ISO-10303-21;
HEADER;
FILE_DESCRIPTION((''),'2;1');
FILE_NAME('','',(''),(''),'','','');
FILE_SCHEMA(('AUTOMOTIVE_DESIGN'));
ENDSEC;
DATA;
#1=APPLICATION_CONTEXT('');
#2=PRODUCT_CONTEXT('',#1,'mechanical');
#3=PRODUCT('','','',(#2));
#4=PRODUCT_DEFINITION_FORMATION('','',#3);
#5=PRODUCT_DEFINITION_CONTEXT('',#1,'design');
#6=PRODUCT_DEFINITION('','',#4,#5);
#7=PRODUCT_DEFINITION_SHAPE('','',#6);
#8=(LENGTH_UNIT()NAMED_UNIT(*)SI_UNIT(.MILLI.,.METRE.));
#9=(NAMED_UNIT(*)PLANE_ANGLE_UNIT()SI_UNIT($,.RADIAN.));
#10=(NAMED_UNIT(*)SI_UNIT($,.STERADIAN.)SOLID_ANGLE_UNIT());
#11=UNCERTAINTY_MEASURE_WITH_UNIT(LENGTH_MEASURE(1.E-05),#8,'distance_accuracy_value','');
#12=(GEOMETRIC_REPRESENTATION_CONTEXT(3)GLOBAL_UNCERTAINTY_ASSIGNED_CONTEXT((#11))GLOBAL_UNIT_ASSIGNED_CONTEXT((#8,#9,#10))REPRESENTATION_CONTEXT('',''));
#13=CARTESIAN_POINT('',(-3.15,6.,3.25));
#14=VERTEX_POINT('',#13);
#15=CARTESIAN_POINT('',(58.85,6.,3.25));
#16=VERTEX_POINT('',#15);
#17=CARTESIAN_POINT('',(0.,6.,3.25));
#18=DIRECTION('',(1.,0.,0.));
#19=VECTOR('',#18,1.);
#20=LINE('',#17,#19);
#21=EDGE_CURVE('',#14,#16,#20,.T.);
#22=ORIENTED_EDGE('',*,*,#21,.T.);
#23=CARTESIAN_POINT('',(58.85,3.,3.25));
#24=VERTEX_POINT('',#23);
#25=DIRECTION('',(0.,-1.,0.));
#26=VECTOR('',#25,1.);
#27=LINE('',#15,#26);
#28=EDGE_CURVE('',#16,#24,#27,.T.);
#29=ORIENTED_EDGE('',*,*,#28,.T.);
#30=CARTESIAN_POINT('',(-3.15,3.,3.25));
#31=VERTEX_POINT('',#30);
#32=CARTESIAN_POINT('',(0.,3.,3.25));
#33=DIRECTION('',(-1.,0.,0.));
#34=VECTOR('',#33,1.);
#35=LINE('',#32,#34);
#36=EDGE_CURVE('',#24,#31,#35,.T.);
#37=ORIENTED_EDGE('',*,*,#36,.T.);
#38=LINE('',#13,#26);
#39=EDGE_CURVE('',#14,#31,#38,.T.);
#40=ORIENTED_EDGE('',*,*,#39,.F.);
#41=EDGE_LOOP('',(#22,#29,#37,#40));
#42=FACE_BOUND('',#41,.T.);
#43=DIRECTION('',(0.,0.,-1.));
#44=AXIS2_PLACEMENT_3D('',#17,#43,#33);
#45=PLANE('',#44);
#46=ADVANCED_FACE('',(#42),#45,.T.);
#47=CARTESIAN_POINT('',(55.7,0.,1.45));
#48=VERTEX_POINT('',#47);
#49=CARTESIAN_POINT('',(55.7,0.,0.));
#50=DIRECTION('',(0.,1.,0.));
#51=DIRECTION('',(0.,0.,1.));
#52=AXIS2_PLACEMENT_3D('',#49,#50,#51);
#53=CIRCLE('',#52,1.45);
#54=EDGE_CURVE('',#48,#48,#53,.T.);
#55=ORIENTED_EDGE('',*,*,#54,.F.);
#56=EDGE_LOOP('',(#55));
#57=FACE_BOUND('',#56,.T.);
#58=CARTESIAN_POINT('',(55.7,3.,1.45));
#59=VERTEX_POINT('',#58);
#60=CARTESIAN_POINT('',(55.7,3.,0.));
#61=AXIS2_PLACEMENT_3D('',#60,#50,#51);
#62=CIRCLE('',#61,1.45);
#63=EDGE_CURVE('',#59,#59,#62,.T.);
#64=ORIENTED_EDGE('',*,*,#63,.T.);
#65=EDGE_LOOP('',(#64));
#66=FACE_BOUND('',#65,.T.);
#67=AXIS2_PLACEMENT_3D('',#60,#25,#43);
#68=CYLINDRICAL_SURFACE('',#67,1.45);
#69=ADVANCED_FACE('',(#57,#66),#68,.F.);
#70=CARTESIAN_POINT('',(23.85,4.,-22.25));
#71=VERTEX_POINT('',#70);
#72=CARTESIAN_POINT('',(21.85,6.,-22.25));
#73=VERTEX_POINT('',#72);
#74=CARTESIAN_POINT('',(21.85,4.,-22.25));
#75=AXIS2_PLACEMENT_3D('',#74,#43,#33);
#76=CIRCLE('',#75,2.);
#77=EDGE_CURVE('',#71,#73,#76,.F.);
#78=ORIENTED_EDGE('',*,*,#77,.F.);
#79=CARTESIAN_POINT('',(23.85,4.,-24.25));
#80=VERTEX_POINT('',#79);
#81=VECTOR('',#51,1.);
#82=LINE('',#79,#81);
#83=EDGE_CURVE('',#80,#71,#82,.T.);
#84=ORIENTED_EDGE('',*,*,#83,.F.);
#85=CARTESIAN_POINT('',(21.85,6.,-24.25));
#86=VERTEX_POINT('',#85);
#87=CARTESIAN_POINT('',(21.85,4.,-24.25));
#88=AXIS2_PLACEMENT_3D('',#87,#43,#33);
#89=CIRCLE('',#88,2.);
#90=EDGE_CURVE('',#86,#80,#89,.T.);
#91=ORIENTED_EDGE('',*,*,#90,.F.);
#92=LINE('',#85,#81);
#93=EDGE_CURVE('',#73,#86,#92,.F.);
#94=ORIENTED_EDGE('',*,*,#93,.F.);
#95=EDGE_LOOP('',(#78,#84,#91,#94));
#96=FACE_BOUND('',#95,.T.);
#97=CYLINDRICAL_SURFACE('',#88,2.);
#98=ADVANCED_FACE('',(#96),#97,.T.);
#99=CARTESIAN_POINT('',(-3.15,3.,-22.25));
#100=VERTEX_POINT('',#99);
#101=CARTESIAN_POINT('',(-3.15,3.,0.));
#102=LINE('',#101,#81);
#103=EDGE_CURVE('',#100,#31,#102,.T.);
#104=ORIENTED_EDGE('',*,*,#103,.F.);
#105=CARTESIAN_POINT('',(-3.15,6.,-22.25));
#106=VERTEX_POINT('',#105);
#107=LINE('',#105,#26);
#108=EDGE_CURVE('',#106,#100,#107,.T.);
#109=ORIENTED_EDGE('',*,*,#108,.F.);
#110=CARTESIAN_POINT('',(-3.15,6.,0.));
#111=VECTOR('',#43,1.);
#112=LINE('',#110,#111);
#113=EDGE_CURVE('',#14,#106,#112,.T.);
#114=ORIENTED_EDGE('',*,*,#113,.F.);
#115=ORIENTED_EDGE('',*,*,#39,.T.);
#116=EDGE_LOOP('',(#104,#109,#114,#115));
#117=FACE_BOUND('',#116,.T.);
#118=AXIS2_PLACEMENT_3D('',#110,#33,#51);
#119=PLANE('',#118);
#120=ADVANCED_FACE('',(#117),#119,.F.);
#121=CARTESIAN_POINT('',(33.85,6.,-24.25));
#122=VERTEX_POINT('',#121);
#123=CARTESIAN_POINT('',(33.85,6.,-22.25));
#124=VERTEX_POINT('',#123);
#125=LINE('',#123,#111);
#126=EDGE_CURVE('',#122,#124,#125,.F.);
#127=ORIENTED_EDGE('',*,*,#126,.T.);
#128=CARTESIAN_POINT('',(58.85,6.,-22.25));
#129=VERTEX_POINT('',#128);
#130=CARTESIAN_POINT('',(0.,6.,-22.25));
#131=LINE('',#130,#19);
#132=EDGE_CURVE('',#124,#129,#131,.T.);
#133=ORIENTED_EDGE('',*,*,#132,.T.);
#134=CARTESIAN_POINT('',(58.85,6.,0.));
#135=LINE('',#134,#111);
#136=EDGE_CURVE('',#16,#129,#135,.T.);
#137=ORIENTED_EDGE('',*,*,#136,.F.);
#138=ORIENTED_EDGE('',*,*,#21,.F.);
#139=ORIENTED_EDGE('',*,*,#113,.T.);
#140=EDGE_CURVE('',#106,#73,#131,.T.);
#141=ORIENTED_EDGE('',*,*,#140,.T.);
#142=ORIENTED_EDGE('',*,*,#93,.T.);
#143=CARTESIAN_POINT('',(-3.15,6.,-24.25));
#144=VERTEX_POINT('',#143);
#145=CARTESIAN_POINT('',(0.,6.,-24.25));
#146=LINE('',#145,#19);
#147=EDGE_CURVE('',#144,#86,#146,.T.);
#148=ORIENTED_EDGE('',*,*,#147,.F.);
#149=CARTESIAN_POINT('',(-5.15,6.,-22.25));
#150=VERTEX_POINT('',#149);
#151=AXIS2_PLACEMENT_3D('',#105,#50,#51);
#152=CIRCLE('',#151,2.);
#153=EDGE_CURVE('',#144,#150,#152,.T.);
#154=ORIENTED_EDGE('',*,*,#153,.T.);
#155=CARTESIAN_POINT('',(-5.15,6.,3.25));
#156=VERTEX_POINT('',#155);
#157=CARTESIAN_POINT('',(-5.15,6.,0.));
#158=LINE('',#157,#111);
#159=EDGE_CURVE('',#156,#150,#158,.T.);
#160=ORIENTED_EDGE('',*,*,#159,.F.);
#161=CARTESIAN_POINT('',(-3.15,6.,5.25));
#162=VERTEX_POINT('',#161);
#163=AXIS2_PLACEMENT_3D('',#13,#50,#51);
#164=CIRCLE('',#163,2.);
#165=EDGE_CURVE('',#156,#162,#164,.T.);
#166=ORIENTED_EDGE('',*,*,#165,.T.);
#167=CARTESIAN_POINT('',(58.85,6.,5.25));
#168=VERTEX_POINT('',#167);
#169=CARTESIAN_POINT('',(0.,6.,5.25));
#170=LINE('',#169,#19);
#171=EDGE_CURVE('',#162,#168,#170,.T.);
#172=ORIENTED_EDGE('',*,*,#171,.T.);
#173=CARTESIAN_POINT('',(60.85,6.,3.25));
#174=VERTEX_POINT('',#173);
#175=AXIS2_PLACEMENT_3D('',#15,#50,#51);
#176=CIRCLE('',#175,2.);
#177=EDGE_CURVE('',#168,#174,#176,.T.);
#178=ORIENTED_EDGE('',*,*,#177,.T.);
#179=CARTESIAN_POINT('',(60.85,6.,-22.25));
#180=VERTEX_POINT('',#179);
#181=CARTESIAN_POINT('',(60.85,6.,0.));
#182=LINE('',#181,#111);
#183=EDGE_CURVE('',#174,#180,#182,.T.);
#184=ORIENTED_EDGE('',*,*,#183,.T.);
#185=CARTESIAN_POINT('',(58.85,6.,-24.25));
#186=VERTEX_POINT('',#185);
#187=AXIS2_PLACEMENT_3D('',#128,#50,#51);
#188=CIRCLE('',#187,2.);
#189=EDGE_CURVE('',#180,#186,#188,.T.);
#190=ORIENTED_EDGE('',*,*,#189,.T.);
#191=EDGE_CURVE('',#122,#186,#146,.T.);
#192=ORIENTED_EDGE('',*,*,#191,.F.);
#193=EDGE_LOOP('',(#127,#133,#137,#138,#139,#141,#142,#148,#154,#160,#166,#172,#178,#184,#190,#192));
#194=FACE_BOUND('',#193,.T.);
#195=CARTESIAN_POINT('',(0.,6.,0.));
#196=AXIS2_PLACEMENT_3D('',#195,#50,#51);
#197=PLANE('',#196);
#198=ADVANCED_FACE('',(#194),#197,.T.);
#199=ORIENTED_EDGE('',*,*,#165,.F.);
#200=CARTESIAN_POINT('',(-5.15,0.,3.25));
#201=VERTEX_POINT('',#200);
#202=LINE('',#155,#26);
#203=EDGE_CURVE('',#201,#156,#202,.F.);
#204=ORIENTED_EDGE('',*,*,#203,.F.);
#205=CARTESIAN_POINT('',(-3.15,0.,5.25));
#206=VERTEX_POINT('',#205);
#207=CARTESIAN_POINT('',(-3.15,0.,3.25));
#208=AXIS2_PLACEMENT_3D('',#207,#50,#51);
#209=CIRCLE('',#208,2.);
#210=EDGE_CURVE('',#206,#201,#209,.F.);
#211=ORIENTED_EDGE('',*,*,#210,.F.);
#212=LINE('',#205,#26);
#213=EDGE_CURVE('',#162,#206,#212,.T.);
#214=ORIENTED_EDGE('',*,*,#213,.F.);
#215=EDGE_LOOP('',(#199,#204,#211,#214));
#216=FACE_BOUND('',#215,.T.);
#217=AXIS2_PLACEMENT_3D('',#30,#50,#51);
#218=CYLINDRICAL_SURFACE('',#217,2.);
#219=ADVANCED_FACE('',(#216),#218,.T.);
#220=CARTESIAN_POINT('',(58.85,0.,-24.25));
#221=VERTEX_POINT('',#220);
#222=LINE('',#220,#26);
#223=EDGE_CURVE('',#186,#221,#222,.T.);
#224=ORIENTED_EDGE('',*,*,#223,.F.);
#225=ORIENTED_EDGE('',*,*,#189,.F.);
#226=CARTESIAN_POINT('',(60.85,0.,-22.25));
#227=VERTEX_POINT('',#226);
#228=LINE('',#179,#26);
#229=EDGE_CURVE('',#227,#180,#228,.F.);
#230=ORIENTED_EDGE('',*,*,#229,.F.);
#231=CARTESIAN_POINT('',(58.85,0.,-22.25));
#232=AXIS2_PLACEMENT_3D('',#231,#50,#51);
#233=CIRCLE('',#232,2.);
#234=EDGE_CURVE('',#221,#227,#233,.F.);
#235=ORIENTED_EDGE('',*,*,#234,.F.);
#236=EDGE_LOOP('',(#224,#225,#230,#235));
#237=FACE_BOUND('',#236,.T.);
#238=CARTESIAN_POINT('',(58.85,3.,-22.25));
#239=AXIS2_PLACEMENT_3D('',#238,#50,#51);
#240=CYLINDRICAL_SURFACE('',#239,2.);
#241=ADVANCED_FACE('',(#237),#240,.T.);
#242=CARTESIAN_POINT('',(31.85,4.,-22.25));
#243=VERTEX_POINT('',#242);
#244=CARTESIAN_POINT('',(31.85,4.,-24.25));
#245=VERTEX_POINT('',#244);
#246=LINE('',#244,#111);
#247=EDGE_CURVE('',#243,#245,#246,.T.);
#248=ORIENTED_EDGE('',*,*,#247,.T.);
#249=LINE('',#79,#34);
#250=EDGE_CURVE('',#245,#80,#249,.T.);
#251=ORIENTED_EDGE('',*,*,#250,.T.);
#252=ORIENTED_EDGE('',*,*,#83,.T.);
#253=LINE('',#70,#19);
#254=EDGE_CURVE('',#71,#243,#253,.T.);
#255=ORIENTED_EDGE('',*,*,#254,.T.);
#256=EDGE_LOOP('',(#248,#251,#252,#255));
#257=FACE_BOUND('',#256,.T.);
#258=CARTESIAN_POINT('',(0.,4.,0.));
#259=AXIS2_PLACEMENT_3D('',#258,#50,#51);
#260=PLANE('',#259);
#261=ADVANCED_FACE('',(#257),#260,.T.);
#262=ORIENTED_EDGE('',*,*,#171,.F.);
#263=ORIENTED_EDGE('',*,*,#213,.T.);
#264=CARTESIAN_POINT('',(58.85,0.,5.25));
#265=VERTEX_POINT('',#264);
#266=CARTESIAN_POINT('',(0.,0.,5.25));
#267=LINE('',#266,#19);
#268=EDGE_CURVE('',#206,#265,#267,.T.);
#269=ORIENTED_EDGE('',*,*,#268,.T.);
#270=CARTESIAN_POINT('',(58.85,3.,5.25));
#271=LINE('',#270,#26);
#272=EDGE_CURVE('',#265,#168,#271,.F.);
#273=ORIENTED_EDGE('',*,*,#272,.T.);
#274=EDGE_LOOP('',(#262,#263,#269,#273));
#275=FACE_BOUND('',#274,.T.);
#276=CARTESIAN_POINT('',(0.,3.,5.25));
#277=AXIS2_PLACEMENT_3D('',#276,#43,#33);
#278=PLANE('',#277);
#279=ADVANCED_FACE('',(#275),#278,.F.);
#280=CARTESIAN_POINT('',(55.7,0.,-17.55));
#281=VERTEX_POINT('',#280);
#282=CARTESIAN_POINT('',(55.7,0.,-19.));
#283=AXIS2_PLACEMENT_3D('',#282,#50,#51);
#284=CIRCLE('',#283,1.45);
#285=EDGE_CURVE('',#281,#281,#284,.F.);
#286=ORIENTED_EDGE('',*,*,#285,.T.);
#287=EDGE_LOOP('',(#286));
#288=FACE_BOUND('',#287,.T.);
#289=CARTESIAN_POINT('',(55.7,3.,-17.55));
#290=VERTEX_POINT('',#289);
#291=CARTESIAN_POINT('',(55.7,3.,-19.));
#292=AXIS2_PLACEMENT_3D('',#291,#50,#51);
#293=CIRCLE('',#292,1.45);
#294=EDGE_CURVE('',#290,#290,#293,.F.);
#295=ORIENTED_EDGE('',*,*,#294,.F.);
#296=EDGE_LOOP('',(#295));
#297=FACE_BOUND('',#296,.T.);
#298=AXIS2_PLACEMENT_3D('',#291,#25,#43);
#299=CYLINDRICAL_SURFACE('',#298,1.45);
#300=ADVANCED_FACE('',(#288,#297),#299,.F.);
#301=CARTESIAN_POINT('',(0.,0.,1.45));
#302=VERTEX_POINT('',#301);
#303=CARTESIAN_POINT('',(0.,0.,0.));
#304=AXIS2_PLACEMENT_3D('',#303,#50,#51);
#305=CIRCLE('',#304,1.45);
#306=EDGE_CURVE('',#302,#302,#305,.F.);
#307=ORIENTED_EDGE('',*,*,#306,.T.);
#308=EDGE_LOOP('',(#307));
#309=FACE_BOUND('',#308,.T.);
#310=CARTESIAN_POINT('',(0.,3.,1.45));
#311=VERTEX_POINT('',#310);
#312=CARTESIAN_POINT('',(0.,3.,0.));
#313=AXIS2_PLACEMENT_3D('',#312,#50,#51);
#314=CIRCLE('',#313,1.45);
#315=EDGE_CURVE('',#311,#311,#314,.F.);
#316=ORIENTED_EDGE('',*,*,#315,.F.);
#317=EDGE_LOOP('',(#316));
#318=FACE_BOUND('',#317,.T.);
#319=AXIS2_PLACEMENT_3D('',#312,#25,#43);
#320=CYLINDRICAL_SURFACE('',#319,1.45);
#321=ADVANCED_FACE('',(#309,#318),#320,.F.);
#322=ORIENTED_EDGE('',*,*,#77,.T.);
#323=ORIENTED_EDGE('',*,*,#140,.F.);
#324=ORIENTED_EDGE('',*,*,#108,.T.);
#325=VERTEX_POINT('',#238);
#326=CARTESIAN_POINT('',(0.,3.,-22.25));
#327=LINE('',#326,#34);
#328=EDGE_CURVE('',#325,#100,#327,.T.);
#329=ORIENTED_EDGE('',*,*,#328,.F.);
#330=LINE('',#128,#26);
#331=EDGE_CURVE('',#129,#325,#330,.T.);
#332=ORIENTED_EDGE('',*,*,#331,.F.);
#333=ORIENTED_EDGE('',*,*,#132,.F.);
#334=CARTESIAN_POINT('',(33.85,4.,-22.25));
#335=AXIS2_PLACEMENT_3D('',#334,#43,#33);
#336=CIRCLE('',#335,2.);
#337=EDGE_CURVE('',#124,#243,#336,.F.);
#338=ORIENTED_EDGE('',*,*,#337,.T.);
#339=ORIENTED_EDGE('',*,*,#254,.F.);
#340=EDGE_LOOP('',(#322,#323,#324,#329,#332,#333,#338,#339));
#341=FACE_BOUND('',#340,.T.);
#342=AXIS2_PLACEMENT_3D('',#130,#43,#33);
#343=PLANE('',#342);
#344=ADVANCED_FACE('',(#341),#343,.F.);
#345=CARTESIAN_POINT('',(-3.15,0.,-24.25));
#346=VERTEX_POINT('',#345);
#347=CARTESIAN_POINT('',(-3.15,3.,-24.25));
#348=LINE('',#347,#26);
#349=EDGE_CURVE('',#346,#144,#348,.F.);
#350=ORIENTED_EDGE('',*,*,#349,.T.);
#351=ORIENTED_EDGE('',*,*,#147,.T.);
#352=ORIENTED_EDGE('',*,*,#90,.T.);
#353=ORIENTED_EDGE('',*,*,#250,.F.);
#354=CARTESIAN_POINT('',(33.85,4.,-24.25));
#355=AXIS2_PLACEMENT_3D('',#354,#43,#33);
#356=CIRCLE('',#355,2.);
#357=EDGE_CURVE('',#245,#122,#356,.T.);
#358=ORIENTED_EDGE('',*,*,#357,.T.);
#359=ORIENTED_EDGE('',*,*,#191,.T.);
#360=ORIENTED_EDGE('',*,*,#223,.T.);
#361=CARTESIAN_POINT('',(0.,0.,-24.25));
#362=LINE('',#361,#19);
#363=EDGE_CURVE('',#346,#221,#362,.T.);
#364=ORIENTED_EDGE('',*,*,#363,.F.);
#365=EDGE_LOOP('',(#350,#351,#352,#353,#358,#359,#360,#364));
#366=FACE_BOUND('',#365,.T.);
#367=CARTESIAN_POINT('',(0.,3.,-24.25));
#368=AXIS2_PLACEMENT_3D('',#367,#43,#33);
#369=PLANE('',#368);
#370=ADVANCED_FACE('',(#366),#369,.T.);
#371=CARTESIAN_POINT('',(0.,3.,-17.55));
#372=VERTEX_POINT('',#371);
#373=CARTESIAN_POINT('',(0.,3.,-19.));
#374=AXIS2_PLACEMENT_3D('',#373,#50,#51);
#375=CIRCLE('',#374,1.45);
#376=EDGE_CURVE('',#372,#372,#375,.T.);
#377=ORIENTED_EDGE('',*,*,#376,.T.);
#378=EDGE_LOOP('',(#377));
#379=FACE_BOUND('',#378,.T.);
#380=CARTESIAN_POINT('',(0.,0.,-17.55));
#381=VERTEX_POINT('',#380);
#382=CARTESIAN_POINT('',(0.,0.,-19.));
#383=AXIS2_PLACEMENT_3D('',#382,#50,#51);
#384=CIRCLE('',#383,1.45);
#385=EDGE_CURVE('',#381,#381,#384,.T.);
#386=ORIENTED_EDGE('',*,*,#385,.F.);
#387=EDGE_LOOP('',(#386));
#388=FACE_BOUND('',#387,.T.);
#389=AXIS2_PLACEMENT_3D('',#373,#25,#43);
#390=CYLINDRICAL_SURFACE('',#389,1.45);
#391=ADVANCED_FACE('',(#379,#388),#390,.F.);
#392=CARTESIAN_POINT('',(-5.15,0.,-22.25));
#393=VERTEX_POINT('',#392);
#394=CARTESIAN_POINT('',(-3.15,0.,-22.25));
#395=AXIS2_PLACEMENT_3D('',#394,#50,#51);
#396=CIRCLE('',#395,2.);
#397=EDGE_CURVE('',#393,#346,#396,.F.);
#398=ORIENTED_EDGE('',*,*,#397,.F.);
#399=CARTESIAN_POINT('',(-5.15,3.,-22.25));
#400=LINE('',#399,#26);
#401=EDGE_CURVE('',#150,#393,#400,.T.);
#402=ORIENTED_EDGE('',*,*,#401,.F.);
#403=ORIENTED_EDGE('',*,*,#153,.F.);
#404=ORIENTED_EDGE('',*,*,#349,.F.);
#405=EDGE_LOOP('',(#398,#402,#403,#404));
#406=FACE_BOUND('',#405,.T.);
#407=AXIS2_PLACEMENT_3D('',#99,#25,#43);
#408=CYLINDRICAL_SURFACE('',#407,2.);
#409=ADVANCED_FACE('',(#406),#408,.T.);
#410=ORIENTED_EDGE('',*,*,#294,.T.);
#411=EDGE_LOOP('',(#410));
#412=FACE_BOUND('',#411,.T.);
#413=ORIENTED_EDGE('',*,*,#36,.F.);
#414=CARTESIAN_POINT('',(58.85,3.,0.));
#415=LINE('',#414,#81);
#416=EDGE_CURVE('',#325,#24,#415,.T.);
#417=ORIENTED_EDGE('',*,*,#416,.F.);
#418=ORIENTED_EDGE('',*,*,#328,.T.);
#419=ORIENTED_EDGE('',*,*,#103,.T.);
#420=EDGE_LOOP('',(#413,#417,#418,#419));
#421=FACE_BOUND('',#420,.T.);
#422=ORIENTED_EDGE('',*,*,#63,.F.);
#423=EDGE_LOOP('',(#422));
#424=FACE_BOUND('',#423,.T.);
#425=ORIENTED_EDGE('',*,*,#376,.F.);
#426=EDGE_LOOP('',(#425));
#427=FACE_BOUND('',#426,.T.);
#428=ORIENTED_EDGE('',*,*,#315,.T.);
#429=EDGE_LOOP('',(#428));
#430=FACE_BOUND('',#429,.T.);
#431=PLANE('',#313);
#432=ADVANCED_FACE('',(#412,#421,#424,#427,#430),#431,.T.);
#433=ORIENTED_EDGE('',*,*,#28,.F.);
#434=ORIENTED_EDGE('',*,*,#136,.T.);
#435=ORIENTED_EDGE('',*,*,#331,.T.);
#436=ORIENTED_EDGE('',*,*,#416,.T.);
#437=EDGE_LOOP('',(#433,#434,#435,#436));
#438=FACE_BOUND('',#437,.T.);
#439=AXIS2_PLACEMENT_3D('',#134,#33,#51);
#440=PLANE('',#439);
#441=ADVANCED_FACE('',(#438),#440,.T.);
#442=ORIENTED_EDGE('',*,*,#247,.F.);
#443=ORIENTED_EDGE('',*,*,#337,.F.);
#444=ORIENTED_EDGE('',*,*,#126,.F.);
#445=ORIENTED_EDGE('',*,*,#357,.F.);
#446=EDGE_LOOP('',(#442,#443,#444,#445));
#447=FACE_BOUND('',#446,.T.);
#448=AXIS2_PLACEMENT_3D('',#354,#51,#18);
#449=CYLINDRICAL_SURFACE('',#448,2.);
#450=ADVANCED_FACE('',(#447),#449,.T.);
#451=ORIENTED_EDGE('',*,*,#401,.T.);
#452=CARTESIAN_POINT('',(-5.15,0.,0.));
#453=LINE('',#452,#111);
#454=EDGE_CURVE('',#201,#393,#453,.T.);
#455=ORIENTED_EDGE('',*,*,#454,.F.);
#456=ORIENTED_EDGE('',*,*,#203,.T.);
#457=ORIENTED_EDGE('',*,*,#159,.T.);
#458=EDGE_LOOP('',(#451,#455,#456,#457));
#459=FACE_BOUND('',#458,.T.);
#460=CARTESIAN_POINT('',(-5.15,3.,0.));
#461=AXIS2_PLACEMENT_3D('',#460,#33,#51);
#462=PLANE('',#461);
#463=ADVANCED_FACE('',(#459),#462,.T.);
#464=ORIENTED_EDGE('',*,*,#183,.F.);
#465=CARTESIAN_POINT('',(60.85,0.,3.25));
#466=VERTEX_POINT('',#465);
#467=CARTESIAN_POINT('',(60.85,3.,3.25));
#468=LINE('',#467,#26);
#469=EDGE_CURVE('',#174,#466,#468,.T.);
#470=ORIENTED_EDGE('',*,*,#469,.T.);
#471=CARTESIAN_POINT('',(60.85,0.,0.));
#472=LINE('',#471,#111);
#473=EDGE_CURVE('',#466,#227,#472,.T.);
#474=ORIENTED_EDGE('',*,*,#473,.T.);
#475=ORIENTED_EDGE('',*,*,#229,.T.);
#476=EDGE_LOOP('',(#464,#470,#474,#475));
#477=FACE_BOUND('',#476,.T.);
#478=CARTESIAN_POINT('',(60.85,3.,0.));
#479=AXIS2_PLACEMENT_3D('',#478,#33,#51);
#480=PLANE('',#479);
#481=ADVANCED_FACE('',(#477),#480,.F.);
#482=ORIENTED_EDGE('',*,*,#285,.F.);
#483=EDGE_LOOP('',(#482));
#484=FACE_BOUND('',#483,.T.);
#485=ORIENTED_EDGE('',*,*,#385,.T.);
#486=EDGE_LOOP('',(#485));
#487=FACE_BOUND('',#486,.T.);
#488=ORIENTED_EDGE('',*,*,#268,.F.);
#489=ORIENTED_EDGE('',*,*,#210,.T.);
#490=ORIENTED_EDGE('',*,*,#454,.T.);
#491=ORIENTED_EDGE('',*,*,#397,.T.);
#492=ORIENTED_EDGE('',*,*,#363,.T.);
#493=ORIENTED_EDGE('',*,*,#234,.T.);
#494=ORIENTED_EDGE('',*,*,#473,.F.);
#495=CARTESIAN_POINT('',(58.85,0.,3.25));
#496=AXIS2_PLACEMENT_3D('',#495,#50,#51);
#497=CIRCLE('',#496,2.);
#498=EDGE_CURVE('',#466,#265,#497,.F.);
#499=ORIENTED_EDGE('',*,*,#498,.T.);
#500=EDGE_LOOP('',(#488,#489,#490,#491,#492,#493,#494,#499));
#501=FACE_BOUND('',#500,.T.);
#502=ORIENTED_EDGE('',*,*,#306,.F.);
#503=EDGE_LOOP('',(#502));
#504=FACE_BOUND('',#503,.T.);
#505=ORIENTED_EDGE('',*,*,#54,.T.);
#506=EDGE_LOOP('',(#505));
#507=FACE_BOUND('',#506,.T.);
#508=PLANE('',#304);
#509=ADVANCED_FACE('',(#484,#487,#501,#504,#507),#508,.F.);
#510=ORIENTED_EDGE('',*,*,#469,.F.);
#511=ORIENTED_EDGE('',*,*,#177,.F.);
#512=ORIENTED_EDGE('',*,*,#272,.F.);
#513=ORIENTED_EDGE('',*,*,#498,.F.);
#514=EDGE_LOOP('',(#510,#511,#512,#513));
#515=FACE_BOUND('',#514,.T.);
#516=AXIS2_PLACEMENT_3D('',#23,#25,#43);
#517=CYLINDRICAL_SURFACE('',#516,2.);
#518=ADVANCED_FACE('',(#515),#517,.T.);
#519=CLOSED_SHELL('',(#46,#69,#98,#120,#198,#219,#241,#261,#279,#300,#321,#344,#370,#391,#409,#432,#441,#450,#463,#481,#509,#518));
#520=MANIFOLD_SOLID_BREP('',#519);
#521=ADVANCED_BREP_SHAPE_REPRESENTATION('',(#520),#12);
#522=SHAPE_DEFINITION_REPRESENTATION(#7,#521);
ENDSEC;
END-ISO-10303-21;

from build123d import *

# Parameters (mm, degrees)
SKETCH1_W           = 66
SKETCH1_H           = 29.5
SKETCH1_W_2         = 62
SKETCH1_H_2         = 25.5
SKETCH1_R           = 1.45
BOSS_EXTRUDE1_DEPTH = 3
SKETCH1_3_W         = 66
SKETCH1_3_H         = 29.5
SKETCH1_3_W_2       = 62
SKETCH1_3_H_2       = 25.5
BOSS_EXTRUDE3_DEPTH = 6
FILLET1_R           = 2
SKETCH2_W           = 8
SKETCH2_H           = 2
CUT_EXTRUDE1_DEPTH  = 2
FILLET2_R           = 2


with BuildPart() as part:
    # Sketch1 → Boss-Extrude1 (new body)
    # profile 1 of 2: a face of its own
    with BuildSketch(Plane(origin=(0, 0, 0), x_dir=(1, 0, 0), z_dir=(0, 1, 0))):
        with Locations((27.85, 9.5)):
            Rectangle(SKETCH1_W, SKETCH1_H)
        with Locations((27.85, 9.5)):
            Rectangle(SKETCH1_W_2, SKETCH1_H_2, mode=Mode.SUBTRACT)
    # profile 2 of 2: a face of its own
    with BuildSketch(Plane(origin=(0, 0, 0), x_dir=(1, 0, 0), z_dir=(0, 1, 0))):
        with Locations((27.85, 9.5)):
            Rectangle(SKETCH1_W_2, SKETCH1_H_2)
        with Locations(Location((55.7, 19, 0), (0, 0, 270))):
            Circle(SKETCH1_R, mode=Mode.SUBTRACT)
        with Locations(Location((0, 19, 0), (0, 0, 270))):
            Circle(SKETCH1_R, mode=Mode.SUBTRACT)
        with Locations(Location((55.7, 0, 0), (0, 0, 270))):
            Circle(SKETCH1_R, mode=Mode.SUBTRACT)
        with Locations(Location((0, 0, 0), (0, 0, 270))):
            Circle(SKETCH1_R, mode=Mode.SUBTRACT)
    extrude(amount=BOSS_EXTRUDE1_DEPTH)

    # Sketch1<3> → Boss-Extrude3 (add)
    with BuildSketch(Plane(origin=(0, 0, 0), x_dir=(1, 0, 0), z_dir=(0, 1, 0))):
        with Locations((27.85, 9.5)):
            Rectangle(SKETCH1_3_W, SKETCH1_3_H)
        with Locations((27.85, 9.5)):
            Rectangle(SKETCH1_3_W_2, SKETCH1_3_H_2, mode=Mode.SUBTRACT)
    extrude(amount=BOSS_EXTRUDE3_DEPTH)

    # Fillet1
    fillet1_edges = [part.edges().sort_by_distance(p)[0] for p in [
        (-5.15, 3, -24.25),
        (60.85, 3, -24.25),
        (60.85, 3, 5.25),
        (-5.15, 3, 5.25),
    ]]
    fillet(fillet1_edges, radius=FILLET1_R)

    # Sketch2 → Cut-Extrude1 (cut)
    with BuildSketch(Plane(origin=(0, 6, 0), x_dir=(1, 0, 0), z_dir=(0, 1, 0))):
        with Locations((27.85, 23.25)):
            Rectangle(SKETCH2_W, SKETCH2_H)
    extrude(amount=-CUT_EXTRUDE1_DEPTH, mode=Mode.SUBTRACT)

    # Fillet2
    fillet2_edges = [part.edges().sort_by_distance(p)[0] for p in [
        (31.85, 6, -23.25),
        (23.85, 6, -23.25),
    ]]
    fillet(fillet2_edges, radius=FILLET2_R - 0.0001)  # a hair under: the kernel refuses the full size


solid = part.part
